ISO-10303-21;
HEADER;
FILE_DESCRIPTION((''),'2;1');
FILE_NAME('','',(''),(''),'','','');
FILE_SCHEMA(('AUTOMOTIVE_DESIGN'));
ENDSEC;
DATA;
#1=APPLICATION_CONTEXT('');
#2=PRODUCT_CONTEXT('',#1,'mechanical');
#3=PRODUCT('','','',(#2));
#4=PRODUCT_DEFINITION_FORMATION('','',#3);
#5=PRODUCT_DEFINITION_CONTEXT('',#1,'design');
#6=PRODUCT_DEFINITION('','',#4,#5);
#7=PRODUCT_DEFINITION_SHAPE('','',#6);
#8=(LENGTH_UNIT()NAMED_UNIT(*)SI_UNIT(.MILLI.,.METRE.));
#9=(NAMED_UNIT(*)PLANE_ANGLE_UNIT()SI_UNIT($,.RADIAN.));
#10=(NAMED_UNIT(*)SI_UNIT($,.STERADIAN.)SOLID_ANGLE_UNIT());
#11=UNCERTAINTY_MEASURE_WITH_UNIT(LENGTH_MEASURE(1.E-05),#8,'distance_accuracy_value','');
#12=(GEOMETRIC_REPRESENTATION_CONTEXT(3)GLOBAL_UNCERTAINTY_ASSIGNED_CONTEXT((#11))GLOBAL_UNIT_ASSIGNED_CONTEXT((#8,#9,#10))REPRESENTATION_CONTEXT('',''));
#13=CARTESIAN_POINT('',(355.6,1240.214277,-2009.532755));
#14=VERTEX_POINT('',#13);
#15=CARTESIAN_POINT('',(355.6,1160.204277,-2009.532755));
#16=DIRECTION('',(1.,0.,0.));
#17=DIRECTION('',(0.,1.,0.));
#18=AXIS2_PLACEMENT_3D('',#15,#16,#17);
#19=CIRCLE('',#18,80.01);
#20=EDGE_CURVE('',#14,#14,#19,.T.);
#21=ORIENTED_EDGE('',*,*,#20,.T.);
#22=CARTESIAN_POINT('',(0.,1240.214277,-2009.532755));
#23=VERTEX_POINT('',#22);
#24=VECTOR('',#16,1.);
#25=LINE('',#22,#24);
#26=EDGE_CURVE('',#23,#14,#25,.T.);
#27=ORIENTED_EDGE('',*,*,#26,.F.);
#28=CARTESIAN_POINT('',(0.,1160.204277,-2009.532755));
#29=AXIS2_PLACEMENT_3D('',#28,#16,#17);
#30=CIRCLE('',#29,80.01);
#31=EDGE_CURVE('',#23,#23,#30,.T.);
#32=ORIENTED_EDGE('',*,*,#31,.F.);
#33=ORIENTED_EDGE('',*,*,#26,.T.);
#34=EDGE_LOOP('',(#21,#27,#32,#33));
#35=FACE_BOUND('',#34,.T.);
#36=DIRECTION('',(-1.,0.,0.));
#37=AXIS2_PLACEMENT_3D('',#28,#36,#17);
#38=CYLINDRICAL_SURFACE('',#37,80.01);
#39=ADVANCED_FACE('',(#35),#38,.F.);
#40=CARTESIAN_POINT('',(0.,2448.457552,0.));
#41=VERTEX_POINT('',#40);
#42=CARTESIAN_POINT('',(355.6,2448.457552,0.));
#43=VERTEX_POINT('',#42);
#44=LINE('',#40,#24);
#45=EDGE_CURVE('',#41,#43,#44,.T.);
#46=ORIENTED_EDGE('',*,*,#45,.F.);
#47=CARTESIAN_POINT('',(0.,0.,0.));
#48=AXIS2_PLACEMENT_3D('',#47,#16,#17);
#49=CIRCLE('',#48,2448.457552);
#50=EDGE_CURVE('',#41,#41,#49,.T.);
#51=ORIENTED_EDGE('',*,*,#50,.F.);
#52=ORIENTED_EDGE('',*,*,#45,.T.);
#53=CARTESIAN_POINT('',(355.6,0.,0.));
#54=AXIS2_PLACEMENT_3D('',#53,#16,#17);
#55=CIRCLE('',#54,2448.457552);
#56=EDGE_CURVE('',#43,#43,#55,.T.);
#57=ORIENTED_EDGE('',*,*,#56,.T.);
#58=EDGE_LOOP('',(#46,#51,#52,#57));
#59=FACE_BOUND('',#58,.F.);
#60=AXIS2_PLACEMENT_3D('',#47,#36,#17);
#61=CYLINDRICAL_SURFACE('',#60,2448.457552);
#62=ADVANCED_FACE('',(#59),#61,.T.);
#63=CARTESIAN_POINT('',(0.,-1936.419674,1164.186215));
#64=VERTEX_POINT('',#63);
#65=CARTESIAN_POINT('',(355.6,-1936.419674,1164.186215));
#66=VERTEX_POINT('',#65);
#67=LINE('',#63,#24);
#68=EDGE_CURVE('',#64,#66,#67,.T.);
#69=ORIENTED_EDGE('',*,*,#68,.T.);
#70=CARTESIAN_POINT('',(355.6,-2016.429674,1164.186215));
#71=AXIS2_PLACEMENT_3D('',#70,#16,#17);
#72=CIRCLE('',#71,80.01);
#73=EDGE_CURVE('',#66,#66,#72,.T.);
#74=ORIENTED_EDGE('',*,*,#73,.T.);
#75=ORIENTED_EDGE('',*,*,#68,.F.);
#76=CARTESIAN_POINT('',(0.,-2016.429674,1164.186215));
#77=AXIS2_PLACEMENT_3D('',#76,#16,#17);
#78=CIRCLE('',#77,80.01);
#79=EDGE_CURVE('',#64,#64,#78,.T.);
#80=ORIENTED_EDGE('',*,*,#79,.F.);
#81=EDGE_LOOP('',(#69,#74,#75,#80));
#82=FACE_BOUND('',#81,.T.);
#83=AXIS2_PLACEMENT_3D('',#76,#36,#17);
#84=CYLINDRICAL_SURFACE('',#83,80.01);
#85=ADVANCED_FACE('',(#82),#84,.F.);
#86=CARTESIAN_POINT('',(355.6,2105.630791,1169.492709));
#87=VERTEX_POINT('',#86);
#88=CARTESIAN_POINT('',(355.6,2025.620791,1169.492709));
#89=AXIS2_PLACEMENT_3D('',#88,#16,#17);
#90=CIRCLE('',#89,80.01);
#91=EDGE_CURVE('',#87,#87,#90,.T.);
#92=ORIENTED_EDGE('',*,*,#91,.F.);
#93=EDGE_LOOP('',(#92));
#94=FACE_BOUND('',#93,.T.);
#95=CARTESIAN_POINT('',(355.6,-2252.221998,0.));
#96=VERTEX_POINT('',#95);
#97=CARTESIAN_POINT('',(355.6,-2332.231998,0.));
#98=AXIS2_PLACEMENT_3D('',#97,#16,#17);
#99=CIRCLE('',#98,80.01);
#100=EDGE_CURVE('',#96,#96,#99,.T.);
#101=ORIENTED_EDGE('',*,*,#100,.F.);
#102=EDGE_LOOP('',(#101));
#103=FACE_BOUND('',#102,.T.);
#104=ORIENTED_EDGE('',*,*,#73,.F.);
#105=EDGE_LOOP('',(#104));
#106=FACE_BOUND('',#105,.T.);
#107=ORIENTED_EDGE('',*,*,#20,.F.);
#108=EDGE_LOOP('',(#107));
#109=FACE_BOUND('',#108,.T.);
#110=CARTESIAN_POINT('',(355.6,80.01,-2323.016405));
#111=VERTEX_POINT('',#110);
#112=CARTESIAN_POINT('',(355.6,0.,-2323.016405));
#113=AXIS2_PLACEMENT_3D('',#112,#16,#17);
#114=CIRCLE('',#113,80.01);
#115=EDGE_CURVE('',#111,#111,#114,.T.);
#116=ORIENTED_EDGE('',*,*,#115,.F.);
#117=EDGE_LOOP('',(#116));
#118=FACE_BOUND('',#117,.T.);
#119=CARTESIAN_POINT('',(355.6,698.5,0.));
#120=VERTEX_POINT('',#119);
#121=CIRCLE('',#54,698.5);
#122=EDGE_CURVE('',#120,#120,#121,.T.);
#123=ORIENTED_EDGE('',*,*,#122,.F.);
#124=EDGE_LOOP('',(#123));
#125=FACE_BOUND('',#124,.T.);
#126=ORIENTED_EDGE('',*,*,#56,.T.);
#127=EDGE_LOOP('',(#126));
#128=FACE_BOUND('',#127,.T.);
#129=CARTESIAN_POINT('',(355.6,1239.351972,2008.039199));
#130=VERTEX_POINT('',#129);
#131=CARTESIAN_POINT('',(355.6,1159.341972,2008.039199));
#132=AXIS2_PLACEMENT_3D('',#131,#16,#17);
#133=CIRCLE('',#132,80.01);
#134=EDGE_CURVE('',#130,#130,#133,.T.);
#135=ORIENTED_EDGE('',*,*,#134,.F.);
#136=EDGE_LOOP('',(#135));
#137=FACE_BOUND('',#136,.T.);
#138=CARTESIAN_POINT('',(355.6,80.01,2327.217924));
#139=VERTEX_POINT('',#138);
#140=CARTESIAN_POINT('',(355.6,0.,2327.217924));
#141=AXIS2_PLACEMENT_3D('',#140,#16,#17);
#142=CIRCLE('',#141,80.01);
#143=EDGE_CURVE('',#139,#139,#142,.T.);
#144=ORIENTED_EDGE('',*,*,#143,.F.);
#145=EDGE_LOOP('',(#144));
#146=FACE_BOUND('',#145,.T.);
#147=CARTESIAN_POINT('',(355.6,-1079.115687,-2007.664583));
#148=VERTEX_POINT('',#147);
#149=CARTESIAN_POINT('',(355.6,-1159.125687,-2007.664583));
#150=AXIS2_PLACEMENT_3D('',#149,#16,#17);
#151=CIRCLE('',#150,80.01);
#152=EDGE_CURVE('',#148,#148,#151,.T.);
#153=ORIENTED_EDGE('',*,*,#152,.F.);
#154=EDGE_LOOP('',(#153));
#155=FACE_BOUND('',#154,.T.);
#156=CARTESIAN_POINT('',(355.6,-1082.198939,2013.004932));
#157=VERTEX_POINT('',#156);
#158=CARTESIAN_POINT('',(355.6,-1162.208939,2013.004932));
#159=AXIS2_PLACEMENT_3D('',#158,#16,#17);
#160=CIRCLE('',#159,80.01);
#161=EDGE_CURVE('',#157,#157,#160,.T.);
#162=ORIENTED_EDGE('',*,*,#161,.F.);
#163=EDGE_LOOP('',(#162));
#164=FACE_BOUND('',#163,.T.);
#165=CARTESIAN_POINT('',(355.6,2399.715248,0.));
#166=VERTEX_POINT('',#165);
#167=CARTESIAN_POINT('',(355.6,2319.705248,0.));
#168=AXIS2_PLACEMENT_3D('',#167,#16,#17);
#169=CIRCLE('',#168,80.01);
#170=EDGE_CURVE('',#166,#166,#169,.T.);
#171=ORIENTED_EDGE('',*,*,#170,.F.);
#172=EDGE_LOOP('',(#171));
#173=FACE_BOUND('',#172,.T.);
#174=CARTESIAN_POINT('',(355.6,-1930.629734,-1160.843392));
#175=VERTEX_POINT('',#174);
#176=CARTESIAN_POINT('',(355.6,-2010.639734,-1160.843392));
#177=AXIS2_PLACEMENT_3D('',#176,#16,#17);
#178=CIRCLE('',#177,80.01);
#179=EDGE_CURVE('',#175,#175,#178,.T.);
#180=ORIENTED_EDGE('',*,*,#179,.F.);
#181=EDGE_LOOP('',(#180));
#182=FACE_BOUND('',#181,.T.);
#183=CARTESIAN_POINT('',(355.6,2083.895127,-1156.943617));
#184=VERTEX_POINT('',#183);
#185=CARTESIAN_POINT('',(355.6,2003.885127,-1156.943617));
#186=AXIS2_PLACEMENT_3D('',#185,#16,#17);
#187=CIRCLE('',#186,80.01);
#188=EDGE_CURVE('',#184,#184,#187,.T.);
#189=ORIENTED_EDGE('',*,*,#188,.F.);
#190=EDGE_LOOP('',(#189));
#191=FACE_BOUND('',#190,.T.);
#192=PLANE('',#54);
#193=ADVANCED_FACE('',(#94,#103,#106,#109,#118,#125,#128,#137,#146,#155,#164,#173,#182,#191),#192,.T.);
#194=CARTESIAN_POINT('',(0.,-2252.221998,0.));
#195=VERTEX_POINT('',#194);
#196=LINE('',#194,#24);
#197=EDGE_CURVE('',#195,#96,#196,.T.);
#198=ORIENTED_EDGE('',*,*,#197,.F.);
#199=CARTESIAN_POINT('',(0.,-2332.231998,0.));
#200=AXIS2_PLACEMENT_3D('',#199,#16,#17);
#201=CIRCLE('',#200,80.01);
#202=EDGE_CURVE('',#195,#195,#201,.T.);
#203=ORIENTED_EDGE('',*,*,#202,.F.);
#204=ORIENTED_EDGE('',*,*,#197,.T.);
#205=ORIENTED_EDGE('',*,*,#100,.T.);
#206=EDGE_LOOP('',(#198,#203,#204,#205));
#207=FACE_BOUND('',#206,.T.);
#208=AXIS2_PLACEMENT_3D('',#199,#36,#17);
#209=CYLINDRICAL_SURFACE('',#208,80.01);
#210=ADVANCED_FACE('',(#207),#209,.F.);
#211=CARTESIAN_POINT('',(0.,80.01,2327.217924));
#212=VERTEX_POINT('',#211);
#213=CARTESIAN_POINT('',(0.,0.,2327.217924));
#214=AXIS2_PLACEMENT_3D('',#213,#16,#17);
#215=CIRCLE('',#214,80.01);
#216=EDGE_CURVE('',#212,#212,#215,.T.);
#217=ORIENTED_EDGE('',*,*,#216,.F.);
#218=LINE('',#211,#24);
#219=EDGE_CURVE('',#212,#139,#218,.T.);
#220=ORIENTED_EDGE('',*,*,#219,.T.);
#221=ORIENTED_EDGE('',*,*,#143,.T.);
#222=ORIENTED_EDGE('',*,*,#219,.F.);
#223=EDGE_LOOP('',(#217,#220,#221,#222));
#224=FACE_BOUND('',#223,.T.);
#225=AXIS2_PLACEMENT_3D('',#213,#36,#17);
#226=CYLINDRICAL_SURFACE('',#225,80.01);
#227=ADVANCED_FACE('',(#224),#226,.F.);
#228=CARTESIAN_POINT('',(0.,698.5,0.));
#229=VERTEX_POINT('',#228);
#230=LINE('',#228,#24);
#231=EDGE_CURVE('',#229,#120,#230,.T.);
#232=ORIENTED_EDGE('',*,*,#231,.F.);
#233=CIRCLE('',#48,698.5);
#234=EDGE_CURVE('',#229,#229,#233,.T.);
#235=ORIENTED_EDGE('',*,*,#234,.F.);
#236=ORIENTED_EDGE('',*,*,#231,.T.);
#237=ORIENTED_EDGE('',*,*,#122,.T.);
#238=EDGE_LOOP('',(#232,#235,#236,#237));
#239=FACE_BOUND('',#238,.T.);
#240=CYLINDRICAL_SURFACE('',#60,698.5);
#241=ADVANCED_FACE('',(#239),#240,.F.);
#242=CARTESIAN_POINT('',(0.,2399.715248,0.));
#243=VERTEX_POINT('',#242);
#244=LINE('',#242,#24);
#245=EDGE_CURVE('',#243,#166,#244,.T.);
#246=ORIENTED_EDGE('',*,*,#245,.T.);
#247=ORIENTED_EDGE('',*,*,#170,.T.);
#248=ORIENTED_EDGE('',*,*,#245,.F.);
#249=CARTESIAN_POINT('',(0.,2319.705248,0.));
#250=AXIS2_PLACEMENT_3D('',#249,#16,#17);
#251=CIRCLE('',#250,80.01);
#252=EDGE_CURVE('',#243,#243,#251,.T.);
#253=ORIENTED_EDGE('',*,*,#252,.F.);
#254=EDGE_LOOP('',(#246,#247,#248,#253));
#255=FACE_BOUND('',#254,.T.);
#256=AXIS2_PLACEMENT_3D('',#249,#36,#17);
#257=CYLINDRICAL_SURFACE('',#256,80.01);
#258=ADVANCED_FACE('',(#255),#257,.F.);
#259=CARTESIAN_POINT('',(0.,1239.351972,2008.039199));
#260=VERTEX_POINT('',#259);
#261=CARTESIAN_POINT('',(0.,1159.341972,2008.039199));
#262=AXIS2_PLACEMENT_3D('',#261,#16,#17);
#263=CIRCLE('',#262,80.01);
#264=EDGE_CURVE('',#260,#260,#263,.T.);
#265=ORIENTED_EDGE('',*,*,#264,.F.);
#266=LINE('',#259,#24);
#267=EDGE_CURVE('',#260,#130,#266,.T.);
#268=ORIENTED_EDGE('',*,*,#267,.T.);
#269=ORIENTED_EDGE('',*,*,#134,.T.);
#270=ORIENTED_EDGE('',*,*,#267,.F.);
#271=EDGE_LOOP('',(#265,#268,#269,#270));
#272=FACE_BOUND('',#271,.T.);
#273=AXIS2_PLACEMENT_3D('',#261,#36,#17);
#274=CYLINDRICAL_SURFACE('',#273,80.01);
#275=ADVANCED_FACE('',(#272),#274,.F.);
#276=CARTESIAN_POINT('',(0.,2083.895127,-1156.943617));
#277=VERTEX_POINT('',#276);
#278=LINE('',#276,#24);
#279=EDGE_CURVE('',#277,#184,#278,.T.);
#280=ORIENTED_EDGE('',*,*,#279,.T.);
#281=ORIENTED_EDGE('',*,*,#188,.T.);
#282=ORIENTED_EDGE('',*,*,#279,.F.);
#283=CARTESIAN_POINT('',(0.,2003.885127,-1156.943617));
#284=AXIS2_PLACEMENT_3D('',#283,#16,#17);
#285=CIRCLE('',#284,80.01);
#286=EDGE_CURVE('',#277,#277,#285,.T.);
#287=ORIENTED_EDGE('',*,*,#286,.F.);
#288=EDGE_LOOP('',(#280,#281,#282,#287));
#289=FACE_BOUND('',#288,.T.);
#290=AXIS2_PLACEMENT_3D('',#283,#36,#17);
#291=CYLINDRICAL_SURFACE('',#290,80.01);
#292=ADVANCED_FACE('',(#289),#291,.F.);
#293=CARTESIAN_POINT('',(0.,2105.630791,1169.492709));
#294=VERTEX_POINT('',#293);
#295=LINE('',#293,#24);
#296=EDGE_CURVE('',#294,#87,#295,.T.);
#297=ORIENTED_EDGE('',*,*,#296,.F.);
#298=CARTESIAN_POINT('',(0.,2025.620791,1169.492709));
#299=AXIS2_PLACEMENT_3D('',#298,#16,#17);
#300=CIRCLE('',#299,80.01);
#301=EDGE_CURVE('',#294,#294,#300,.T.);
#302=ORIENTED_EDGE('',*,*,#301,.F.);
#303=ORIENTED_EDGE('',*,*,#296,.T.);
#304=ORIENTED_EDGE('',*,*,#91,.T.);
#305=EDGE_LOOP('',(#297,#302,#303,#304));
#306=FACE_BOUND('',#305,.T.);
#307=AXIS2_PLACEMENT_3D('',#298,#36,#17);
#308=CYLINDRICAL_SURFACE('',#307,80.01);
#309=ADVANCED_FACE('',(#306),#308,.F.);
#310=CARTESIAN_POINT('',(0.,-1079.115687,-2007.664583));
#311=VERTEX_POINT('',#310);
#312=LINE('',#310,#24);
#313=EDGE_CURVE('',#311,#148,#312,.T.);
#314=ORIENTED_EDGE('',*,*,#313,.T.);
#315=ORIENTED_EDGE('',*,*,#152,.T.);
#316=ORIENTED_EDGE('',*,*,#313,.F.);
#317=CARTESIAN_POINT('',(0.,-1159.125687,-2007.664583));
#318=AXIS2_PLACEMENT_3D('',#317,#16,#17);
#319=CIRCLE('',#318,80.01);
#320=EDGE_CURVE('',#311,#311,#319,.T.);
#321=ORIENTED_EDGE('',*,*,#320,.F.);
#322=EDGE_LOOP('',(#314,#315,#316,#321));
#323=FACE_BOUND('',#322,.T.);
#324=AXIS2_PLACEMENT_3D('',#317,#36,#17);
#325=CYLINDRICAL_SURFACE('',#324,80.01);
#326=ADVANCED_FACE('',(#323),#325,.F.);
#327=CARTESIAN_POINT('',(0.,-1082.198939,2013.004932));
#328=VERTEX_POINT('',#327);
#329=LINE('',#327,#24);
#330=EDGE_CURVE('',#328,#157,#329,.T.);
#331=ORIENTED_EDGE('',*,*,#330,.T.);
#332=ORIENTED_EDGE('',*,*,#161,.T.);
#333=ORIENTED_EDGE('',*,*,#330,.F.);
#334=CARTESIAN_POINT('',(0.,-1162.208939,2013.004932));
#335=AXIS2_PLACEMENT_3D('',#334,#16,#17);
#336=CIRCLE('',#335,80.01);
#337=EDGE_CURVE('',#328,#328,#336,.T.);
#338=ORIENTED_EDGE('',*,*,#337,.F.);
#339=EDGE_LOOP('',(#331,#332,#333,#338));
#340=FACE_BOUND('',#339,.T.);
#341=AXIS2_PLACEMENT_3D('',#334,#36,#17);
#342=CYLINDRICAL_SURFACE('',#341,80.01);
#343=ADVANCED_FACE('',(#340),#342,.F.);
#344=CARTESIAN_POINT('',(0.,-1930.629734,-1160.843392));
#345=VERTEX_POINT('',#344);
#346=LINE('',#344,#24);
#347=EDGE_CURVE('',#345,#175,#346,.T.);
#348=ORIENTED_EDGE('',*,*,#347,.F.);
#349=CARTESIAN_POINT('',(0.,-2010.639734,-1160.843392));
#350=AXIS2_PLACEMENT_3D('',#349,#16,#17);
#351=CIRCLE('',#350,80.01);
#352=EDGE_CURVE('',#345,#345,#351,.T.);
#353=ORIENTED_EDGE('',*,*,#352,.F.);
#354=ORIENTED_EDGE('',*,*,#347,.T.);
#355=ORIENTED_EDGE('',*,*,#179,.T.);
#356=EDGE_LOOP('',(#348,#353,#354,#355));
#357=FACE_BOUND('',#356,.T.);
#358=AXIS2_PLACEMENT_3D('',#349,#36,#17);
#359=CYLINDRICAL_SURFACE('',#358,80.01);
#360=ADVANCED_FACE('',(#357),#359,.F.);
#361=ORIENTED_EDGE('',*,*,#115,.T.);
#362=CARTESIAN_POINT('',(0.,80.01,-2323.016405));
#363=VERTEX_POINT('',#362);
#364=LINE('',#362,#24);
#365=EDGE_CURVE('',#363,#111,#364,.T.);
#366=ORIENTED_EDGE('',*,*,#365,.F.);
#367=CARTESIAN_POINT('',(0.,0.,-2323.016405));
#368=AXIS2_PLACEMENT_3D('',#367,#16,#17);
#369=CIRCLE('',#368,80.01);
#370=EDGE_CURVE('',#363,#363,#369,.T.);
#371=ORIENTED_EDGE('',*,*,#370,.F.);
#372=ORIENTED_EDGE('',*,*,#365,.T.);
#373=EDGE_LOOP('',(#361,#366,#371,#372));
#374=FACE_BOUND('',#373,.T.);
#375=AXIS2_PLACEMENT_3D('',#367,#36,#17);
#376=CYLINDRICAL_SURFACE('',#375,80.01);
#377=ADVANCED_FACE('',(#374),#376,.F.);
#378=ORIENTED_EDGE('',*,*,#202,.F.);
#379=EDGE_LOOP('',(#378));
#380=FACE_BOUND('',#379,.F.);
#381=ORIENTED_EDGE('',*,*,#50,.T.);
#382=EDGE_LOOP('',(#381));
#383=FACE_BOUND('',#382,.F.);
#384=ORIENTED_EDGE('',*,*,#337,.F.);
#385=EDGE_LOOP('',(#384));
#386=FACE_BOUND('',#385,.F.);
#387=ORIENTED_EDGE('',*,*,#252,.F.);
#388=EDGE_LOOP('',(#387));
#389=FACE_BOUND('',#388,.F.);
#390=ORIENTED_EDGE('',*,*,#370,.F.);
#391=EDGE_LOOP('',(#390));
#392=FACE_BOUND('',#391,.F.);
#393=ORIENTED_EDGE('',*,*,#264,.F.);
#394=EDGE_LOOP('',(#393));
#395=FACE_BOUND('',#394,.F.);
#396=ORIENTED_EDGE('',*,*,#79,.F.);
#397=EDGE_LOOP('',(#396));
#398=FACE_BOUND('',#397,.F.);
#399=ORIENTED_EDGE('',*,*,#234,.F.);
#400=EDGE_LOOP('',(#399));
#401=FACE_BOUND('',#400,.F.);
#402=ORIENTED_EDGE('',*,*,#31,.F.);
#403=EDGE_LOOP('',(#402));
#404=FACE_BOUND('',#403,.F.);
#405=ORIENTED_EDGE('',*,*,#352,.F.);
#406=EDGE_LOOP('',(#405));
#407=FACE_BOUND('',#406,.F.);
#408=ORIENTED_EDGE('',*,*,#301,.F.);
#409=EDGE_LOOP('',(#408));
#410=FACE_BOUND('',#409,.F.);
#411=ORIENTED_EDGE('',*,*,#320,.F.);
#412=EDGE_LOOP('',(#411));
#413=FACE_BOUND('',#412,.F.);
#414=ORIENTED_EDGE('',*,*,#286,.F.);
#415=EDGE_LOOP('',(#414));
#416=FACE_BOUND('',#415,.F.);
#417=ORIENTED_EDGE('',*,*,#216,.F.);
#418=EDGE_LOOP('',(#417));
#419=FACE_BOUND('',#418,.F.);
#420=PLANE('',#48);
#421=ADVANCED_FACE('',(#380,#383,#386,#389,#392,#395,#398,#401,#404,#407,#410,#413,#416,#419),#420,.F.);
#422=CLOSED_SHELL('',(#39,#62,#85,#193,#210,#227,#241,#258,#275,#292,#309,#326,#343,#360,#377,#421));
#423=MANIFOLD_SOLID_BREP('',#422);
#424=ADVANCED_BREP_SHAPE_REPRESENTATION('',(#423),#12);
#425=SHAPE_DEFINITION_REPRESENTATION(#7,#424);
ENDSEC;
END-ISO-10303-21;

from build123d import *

# Parameters (mm, degrees)
F0_R     = 2448.457552237
F0_R_2   = 80.01
F0_R_3   = 2192.02
F0_R_4   = 698.5
F1_DEPTH = 355.6


# Not quite as in the source:
# - a feature names something its author has since deleted; it is built from what else it names


with BuildPart() as f1:
    # F0 (on Right) → F1 (new body)
    with BuildSketch(Plane.YZ):
        Circle(F0_R)
        with Locations((-1159.1256873943, -2007.6645829251)):
            Circle(F0_R_2, mode=Mode.SUBTRACT)
        with Locations((-2010.6397344548, -1160.8433919308)):
            Circle(F0_R_2, mode=Mode.SUBTRACT)
        with Locations((0, -2323.0164051056)):
            Circle(F0_R_2, mode=Mode.SUBTRACT)
        with Locations((1160.2042772772, -2009.5327554028)):
            Circle(F0_R_2, mode=Mode.SUBTRACT)
        with Locations((2003.885127001, -1156.9436174991)):
            Circle(F0_R_2, mode=Mode.SUBTRACT)
        with Locations((-2332.2319984436, 0)):
            Circle(F0_R_2, mode=Mode.SUBTRACT)
        with Locations((-2016.4296737363, 1164.1862149336)):
            Circle(F0_R_2, mode=Mode.SUBTRACT)
        with Locations((-1162.2089393996, 2013.0049320509)):
            Circle(F0_R_2, mode=Mode.SUBTRACT)
        Circle(F0_R_3, mode=Mode.SUBTRACT)
        with Locations((2319.705247879, 0)):
            Circle(F0_R_2, mode=Mode.SUBTRACT)
        with Locations((2025.6207910737, 1169.4927090025)):
            Circle(F0_R_2, mode=Mode.SUBTRACT)
        with Locations((0, 2327.2179239424)):
            Circle(F0_R_2, mode=Mode.SUBTRACT)
        with Locations((1159.3419722674, 2008.0391993142)):
            Circle(F0_R_2, mode=Mode.SUBTRACT)
        Circle(F0_R_3)
        with BuildLine():
            ThreePointArc((869.064376413, 0), (-772.1149948812, -398.8876095214), (502.8974287205, 708.7785737001))
            ThreePointArc((502.8974287205, 708.7785737001), (772.1149948812, 398.8876095214), (869.064376413, 0))
        make_face(mode=Mode.SUBTRACT)
        with BuildLine():
            ThreePointArc((869.064376413, 0), (772.1149948812, 398.8876095214), (502.8974287205, 708.7785737001))
            ThreePointArc((502.8974287205, 708.7785737001), (-772.1149948812, -398.8876095214), (869.064376413, 0))
        make_face()
        with BuildLine():
            ThreePointArc((447.4882516835, 616.764350952), (678.83357599, 346.1632217735), (762, 0))
            ThreePointArc((762, 0), (-678.83357599, -346.1632217735), (447.4882516835, 616.764350952))
        make_face(mode=Mode.SUBTRACT)
        with BuildLine():
            ThreePointArc((447.4882516835, 616.764350952), (-678.83357599, -346.1632217735), (762, 0))
            ThreePointArc((762, 0), (678.83357599, 346.1632217735), (447.4882516835, 616.764350952))
        make_face()
        Circle(F0_R_4, mode=Mode.SUBTRACT)
    extrude(amount=F1_DEPTH)


solid = f1.part
